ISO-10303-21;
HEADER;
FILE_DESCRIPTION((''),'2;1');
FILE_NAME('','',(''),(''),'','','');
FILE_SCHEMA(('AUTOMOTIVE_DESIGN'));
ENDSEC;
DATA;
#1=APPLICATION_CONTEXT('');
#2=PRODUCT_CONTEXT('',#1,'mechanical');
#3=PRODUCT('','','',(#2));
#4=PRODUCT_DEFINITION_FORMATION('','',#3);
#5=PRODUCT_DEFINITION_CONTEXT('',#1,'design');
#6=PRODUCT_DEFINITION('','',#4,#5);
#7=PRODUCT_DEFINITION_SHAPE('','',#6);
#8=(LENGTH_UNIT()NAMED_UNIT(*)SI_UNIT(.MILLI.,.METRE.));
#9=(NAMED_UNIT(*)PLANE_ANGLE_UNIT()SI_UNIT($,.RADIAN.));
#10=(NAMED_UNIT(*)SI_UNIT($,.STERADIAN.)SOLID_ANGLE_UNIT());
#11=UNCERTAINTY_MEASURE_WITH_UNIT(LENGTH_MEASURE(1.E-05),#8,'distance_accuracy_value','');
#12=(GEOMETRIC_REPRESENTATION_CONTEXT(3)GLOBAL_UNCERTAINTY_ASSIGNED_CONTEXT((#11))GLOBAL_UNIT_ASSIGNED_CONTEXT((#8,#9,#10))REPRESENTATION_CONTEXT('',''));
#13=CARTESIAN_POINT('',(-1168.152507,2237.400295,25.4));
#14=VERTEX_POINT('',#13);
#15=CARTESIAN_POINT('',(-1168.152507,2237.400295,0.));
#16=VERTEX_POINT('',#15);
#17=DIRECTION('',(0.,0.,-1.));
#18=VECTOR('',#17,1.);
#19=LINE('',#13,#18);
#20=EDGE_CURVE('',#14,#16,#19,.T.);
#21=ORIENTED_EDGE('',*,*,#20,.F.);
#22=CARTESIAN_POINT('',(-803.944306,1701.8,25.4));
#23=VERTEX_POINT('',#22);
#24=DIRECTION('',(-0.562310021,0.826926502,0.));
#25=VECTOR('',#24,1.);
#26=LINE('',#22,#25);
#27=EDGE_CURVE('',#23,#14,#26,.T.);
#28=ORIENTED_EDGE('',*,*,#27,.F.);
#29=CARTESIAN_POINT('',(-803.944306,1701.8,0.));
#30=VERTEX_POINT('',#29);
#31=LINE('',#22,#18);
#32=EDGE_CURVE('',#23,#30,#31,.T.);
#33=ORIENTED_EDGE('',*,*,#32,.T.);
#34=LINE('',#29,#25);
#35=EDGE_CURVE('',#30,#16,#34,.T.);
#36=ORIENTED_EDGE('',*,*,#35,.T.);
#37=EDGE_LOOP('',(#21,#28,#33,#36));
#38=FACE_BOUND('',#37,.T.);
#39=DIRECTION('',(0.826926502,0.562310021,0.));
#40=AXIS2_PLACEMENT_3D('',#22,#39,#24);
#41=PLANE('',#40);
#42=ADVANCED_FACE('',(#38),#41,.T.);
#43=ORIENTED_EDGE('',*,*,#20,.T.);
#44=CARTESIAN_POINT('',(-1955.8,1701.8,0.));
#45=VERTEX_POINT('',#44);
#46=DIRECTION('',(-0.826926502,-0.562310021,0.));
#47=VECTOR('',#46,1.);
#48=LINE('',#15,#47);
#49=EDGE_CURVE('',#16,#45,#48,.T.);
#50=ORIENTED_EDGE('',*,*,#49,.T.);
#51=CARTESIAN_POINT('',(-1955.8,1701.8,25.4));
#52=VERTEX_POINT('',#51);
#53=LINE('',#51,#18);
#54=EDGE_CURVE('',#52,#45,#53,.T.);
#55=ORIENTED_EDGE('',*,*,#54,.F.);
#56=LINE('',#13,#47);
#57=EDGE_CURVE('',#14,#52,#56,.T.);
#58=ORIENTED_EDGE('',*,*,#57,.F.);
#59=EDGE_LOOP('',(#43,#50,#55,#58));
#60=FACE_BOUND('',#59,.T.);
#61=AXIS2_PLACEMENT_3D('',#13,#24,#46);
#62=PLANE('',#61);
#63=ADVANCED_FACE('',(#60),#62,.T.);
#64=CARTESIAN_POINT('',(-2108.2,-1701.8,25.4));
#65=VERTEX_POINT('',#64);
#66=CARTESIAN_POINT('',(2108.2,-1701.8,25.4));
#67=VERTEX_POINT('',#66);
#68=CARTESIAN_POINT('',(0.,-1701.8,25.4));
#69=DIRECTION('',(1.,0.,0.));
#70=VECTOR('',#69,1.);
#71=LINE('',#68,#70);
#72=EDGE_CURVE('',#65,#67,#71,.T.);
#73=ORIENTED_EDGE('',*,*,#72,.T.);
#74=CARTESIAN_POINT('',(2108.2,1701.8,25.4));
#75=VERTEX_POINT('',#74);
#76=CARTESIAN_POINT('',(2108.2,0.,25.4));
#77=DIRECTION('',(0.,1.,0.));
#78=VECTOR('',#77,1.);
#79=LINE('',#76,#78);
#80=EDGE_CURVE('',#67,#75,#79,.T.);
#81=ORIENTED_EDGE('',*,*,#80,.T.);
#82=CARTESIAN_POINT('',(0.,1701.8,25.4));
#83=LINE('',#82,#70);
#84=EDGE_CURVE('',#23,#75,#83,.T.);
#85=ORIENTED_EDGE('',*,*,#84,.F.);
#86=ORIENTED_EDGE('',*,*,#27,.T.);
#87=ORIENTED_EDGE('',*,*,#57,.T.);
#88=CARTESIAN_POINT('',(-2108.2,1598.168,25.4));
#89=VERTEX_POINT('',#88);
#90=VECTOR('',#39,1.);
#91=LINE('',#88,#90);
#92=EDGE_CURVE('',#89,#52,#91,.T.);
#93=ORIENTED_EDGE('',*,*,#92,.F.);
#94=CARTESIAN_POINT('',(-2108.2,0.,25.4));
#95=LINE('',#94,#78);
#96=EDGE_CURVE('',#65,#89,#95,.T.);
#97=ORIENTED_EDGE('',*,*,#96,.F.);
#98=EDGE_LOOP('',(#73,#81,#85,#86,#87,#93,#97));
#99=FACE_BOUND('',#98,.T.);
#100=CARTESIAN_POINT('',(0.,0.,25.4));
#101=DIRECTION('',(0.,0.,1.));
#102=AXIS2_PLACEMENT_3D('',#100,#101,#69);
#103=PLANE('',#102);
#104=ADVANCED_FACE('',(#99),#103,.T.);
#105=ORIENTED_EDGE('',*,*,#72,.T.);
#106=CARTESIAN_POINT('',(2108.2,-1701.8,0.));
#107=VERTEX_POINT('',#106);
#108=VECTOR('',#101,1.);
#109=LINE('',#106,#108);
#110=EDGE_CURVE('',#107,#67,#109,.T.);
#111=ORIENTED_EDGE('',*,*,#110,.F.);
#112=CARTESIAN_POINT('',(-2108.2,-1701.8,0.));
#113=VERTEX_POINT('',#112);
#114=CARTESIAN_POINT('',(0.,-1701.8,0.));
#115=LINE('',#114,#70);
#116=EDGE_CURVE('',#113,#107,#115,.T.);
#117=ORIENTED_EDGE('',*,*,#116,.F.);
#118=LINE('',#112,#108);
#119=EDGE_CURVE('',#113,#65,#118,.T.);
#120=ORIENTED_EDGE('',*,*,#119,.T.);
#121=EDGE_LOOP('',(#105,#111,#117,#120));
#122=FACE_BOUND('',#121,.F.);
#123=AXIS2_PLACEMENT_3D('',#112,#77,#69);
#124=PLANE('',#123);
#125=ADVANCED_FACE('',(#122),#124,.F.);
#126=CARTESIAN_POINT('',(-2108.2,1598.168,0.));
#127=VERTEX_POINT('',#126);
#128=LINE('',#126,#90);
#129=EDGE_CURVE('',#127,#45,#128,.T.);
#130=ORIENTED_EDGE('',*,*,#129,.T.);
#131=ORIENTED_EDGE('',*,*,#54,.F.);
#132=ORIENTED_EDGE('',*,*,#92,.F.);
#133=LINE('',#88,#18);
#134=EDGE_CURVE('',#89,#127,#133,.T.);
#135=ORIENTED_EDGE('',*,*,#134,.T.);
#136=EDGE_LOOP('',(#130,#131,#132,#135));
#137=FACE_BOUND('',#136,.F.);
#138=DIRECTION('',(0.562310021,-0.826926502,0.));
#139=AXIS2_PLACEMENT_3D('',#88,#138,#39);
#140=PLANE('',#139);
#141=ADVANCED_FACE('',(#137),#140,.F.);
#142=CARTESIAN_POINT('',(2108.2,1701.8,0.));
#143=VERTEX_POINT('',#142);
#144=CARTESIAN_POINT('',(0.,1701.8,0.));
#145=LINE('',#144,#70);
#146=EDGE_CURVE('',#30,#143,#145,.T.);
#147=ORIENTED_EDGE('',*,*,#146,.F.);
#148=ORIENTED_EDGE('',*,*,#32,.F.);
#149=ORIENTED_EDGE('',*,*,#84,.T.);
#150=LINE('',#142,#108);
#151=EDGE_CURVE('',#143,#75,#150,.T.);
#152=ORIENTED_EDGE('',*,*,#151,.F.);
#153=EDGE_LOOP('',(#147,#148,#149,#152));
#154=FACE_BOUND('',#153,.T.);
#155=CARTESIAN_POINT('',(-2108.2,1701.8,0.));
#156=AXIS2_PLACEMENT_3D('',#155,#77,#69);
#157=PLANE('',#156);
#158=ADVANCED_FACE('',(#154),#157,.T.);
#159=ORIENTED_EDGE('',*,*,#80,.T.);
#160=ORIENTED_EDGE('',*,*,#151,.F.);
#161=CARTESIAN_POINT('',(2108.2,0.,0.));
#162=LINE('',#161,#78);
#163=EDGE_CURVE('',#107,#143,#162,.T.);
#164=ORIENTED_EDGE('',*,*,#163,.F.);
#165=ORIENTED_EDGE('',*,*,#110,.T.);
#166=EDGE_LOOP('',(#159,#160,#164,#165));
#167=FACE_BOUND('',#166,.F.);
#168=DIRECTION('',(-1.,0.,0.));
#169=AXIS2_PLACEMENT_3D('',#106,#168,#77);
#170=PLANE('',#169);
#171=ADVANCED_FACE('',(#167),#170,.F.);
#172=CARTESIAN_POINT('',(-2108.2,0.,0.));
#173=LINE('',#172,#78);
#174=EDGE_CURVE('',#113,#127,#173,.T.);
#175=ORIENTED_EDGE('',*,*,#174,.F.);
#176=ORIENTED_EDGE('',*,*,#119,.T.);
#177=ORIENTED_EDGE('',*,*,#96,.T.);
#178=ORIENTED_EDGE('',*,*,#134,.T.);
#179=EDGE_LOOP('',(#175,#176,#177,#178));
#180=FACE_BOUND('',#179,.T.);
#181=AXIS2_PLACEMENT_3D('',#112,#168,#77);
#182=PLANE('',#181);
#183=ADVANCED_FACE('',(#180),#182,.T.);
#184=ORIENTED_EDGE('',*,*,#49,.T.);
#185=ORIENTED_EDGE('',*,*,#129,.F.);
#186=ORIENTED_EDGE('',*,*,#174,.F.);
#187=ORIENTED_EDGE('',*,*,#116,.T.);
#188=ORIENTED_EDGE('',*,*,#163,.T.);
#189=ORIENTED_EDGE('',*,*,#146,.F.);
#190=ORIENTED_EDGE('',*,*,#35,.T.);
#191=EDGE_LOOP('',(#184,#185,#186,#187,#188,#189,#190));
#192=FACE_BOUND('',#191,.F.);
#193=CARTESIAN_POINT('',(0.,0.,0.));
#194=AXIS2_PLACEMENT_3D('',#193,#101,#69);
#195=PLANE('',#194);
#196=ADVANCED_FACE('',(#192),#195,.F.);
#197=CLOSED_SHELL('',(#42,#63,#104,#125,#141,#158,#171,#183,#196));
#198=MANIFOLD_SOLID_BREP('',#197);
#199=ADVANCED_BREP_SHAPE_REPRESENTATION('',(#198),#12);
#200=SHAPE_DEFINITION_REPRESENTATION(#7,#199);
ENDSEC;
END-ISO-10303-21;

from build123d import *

# Parameters (mm, degrees)
F0_W     = 4216.4
F0_H     = 3403.6
F1_DEPTH = 25.4
F3_DEPTH = 25.4
F5_DEPTH = 25.4


with BuildPart() as f1:
    # F0 (on Top) → F1 (new body)
    with BuildSketch(Plane.XY):
        Rectangle(F0_W, F0_H)
    extrude(amount=F1_DEPTH)

    # F2 (on face) → F3 (join)
    with BuildSketch(Plane.XY.offset(25.4)):
        Polygon((-1168.1525067788, 2237.4002953904), (-1955.8, 1701.8), (-803.9443059133, 1701.8), align=None)
    extrude(amount=-F3_DEPTH)

    # F4 (on face) → F5 (cut)
    with BuildSketch(Plane.XY.offset(25.4)):
        Polygon((-2108.2, 1598.1680001262), (-1955.8, 1701.8), (-2108.2, 1701.8), align=None)
    extrude(amount=-F5_DEPTH, mode=Mode.SUBTRACT)


solid = f1.part
